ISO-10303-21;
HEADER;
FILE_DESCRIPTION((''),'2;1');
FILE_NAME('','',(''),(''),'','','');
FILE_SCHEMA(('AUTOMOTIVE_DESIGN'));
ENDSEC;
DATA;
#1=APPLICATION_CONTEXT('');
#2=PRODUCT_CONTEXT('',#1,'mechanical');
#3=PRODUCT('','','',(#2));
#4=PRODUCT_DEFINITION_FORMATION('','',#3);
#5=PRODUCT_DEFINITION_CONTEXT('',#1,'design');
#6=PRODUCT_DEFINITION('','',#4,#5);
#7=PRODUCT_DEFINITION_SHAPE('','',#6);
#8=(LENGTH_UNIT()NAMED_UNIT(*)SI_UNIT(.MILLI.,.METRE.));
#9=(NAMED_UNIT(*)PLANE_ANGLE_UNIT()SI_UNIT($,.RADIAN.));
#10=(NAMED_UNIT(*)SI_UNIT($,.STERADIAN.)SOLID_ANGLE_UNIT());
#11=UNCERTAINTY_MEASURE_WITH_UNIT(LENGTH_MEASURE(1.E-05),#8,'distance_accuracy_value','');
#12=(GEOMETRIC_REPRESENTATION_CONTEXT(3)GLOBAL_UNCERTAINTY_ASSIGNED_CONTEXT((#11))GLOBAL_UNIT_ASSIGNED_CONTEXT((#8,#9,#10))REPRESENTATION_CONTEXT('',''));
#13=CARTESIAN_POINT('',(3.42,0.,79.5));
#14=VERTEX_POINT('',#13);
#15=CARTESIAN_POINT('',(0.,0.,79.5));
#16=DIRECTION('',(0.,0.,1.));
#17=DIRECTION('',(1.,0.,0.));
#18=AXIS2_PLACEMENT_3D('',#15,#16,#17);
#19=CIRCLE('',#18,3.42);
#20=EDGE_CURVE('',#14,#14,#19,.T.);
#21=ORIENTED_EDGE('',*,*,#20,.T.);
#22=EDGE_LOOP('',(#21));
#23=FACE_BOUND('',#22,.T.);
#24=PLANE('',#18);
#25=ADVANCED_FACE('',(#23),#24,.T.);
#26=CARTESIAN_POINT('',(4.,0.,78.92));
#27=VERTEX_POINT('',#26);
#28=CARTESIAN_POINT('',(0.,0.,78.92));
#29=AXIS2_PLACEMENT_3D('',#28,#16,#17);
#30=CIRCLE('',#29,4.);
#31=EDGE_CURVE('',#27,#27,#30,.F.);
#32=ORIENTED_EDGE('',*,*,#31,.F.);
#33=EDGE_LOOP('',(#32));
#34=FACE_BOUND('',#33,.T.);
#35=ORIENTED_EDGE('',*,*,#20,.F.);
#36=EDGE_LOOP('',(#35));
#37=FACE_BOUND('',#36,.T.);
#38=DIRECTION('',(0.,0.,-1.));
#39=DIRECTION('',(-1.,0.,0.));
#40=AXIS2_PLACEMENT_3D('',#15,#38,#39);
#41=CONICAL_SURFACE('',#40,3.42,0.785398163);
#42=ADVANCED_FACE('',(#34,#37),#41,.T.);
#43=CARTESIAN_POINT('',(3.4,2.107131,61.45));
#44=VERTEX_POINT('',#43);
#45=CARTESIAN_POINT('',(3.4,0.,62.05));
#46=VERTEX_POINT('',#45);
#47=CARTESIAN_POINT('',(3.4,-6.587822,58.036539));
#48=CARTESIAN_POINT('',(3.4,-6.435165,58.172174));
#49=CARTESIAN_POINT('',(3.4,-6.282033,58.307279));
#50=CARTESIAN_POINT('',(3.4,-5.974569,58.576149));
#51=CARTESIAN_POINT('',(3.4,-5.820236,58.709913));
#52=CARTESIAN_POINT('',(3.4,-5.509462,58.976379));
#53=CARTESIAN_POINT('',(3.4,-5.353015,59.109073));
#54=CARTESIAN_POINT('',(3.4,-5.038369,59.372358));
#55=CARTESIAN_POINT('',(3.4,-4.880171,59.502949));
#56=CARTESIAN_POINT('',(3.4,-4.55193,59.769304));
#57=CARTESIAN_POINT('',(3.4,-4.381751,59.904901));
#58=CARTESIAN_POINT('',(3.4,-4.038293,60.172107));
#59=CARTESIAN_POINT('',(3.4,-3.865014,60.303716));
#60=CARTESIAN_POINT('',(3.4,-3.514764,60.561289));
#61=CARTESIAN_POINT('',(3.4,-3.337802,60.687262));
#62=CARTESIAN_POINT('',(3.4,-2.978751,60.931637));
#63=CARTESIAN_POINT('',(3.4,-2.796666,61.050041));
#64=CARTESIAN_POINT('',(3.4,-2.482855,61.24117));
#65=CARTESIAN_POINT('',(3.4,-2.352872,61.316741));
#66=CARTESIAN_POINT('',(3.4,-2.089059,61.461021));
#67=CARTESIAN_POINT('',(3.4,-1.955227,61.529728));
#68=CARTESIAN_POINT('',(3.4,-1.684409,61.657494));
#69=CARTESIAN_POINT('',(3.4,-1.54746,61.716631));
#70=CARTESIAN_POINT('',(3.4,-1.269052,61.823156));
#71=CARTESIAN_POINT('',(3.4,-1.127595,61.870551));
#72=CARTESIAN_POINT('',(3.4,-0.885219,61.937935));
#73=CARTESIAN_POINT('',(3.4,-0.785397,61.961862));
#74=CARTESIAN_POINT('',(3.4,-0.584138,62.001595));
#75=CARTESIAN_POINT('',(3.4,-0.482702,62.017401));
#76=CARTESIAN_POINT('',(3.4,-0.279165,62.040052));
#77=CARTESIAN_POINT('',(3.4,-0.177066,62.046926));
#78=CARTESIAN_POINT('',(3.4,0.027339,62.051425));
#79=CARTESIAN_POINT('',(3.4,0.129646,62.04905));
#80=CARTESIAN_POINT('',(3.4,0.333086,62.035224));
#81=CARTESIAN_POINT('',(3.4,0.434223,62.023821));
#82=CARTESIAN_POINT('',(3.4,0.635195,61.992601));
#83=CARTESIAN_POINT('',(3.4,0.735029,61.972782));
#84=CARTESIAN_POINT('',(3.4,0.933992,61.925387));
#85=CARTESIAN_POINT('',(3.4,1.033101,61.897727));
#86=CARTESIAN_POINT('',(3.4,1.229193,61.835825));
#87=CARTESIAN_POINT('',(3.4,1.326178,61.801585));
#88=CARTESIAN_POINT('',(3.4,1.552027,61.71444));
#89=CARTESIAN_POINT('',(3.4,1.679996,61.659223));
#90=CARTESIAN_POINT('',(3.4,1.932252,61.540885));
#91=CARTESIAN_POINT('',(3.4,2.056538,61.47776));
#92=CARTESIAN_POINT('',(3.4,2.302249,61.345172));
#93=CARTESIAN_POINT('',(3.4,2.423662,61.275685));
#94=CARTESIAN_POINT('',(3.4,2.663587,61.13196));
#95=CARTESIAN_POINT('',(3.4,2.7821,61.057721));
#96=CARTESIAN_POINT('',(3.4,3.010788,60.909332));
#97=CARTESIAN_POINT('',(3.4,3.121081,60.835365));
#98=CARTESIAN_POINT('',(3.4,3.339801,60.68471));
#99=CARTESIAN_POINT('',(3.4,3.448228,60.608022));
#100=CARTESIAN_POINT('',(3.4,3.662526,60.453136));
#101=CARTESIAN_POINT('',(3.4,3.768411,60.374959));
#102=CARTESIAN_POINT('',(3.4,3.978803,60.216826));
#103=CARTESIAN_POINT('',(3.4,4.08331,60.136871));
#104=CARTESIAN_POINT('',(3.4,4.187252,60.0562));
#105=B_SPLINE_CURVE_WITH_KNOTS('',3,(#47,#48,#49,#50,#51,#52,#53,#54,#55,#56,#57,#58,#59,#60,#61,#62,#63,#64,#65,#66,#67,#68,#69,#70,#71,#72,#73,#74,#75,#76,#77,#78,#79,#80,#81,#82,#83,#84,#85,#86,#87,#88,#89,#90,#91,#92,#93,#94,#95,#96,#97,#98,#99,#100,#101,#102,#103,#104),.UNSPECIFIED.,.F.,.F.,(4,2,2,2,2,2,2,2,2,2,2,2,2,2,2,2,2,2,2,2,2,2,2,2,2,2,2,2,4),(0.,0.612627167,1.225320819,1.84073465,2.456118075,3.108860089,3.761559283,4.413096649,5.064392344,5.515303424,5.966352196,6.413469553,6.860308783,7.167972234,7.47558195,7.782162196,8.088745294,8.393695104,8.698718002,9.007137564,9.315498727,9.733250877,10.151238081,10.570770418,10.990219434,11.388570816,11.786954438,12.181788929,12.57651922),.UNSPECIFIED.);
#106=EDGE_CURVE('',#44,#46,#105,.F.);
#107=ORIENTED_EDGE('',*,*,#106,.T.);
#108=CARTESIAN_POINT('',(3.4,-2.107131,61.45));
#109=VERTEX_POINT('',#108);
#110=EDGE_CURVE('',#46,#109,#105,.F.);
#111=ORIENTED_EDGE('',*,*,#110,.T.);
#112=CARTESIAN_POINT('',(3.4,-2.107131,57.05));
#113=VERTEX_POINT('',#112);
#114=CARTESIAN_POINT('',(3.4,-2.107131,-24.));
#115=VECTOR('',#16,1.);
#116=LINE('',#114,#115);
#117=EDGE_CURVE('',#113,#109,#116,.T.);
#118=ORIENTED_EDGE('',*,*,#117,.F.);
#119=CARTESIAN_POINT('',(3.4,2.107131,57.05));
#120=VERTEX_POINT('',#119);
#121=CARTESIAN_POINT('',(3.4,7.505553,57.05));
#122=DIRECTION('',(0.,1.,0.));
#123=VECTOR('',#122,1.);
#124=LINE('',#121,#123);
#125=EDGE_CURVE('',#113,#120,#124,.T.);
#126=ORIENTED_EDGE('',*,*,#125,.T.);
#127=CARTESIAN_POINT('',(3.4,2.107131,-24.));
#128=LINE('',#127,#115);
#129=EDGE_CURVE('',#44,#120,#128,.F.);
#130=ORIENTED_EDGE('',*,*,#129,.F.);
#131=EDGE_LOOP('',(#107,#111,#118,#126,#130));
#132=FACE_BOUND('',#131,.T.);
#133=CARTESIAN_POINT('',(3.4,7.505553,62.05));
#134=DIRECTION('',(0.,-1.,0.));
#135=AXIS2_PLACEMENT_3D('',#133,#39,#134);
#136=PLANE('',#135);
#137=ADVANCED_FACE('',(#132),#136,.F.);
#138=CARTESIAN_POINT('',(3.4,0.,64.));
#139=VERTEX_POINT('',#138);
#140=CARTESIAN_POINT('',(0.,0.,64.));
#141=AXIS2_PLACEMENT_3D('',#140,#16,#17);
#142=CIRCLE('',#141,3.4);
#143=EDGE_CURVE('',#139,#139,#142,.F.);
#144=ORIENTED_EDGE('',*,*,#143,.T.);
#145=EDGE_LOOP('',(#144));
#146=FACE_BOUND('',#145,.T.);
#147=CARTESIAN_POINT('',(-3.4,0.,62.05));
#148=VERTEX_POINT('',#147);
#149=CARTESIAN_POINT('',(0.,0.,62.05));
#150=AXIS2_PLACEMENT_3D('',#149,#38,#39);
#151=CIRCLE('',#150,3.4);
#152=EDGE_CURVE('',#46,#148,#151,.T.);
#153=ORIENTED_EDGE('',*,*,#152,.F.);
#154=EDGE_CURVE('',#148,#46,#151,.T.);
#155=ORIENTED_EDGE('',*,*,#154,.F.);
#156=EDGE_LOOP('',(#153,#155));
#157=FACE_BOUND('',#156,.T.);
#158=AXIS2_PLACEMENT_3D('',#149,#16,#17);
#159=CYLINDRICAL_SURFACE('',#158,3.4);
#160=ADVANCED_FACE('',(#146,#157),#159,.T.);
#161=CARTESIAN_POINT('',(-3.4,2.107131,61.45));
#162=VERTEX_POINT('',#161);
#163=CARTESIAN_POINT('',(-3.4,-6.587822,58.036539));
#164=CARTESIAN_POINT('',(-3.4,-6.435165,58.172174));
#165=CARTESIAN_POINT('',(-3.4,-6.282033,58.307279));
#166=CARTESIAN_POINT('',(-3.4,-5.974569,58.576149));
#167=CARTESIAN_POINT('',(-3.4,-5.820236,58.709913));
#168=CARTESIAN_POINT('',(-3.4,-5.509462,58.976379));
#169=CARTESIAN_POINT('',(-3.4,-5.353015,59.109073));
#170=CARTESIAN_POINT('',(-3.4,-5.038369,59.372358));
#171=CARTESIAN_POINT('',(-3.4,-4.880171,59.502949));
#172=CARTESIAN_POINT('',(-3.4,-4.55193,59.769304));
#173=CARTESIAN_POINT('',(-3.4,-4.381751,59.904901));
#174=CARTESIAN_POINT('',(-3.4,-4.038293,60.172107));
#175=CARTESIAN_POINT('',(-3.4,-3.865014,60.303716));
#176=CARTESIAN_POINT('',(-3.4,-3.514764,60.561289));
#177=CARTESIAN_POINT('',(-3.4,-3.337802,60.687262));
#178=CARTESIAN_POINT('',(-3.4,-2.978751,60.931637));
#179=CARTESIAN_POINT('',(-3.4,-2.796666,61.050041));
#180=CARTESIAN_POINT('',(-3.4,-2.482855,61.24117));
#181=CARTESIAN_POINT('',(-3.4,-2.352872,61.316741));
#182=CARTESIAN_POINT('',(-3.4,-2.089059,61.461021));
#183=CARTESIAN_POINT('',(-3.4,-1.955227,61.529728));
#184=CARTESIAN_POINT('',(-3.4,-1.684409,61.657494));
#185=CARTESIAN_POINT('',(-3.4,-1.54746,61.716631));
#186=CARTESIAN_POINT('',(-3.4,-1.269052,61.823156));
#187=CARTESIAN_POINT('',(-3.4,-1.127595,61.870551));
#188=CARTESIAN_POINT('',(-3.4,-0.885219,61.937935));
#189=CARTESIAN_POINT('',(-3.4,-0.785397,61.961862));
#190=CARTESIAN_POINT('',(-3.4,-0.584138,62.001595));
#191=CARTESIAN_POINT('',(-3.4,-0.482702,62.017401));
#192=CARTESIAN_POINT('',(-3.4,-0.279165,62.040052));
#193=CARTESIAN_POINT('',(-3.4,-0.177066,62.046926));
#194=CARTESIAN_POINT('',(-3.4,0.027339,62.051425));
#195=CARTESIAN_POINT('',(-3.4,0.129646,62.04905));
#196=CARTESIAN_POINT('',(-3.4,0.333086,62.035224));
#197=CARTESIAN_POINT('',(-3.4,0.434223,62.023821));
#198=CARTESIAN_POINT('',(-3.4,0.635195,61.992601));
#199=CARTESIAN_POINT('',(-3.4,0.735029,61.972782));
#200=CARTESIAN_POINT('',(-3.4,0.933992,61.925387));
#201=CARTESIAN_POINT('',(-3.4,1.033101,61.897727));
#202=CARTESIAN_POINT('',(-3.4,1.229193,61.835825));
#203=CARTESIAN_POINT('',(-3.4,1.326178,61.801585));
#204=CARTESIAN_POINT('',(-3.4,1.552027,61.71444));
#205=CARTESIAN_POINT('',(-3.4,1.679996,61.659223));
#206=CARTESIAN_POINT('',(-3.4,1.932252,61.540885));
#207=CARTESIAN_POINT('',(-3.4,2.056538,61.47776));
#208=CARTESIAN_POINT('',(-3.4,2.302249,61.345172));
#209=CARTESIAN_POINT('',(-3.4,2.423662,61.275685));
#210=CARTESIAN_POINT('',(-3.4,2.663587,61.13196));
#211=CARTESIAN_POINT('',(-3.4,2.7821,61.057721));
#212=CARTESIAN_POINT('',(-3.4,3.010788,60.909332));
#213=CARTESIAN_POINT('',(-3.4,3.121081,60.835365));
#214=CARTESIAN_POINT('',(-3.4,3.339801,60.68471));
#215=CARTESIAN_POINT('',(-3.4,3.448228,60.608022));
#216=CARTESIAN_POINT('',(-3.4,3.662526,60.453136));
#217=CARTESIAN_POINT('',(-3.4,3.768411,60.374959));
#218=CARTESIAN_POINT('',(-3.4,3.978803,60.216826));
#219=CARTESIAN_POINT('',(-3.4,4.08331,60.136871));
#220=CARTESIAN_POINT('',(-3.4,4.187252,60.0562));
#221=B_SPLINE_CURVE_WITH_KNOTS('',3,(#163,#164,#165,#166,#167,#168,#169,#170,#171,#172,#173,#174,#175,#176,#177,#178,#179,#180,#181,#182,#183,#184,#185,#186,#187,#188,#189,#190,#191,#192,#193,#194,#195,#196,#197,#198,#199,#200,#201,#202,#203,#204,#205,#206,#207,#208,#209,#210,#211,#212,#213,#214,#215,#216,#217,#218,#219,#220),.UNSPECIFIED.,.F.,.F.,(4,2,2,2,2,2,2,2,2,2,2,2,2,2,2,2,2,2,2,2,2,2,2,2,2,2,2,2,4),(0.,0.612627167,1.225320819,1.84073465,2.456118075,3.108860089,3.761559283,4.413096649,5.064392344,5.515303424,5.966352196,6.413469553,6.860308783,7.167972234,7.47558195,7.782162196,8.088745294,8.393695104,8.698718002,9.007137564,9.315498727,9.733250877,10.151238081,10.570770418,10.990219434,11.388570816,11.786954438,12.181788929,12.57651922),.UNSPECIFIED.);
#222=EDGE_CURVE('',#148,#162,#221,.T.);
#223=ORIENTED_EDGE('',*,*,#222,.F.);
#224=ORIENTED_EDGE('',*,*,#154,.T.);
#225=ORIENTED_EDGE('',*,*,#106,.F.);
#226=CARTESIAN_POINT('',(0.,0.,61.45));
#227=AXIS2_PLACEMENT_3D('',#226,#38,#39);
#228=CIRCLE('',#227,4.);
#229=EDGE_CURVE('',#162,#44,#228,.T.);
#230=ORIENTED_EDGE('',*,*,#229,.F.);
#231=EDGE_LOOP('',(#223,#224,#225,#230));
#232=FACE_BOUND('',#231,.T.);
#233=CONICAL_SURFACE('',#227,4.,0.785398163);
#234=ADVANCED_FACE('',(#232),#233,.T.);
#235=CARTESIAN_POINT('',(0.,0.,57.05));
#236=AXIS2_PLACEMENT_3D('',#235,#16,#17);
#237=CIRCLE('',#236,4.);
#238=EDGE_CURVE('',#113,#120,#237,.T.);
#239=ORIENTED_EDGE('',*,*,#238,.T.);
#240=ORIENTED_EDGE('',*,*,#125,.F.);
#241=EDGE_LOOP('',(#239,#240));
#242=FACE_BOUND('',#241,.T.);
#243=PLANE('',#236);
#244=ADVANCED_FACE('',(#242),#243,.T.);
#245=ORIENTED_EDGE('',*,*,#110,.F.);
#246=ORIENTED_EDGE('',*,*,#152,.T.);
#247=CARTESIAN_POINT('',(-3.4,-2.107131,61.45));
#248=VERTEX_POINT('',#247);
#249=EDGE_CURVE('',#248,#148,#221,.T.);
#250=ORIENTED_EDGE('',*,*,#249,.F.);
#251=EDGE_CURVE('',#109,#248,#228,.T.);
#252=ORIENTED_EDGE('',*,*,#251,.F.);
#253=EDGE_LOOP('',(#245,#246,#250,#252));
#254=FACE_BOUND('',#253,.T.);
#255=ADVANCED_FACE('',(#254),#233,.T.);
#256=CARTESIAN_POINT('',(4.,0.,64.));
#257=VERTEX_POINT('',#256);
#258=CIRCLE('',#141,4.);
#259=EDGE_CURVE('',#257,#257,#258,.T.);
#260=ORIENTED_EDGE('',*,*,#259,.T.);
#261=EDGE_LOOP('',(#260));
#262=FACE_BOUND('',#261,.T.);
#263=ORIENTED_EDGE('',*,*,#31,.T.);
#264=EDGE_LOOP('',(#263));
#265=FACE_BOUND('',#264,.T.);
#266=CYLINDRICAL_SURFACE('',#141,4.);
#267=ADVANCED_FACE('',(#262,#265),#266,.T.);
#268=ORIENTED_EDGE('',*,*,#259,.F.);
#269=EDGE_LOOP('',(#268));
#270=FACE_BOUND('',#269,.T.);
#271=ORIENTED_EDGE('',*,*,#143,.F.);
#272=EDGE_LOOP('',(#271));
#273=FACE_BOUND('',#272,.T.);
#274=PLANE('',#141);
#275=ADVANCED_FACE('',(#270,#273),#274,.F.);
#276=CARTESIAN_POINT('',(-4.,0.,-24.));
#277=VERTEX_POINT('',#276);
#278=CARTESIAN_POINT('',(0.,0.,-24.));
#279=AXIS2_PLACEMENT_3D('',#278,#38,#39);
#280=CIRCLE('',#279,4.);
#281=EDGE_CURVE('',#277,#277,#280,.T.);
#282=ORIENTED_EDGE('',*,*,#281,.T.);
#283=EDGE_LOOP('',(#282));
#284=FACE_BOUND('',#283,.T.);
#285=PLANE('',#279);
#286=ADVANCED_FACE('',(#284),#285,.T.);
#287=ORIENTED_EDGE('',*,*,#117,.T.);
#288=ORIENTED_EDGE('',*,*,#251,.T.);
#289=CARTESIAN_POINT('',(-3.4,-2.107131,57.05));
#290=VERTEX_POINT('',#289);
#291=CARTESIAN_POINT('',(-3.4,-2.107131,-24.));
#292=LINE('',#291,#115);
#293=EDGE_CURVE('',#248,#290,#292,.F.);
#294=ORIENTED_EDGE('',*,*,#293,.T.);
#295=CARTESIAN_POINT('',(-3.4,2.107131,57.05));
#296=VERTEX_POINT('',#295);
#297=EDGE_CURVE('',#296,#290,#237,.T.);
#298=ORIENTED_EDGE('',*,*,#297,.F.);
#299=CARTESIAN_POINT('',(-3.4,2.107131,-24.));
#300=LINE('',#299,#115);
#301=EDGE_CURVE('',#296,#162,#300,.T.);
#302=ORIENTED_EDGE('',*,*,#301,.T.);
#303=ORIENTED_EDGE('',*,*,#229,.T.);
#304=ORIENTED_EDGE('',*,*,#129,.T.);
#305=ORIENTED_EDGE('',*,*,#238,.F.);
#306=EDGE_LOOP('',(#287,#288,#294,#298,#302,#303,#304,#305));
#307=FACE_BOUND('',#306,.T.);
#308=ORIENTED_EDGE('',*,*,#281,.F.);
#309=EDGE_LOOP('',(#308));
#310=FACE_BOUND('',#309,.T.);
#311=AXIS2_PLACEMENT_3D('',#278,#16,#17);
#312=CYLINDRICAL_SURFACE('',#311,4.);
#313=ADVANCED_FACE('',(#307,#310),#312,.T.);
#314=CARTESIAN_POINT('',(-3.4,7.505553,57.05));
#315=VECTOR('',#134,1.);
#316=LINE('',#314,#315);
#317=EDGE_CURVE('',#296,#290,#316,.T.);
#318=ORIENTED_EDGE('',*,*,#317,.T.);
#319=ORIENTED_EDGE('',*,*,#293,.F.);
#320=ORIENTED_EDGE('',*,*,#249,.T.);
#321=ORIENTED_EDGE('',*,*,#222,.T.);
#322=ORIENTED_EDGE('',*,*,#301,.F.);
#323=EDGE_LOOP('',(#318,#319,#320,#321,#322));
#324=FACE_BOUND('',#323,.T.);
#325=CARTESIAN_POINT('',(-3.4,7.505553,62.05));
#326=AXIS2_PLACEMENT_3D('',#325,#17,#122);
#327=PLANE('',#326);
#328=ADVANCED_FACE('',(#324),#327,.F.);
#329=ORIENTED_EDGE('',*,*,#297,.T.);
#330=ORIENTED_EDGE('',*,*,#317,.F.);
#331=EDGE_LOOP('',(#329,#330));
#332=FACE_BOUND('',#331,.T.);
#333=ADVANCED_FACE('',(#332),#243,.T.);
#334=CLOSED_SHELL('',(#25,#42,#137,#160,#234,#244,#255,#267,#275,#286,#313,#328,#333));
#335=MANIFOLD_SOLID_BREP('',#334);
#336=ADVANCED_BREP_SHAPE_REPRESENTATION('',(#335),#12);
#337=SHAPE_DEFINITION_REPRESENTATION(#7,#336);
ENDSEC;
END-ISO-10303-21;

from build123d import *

# Parameters (mm, degrees)
EXTRUDE_START        = 79.5
SKETCH_4_R           = 4
EXTRUDE_1_DEPTH      = 15.5
SKETCH_5_R           = 3.4
EXTRUDE_2_DEPTH      = 1.95
SKETCH_6_R           = 4
EXTRUDE_3_DEPTH      = 86.05
CHAMFER_1_SIZE       = 0.58
CHAMFER_2_SIZE       = 0.6
CUT_EXTRUDE_START    = 57.05
SKETCH_9_OUTSIDE_W   = 30.824
SKETCH_9_OUTSIDE_H   = 30.824
SKETCH_9_OUTSIDE_W_2 = 6.8
SKETCH_9_OUTSIDE_H_2 = 15.011106998
CUT_EXTRUDE_1_DEPTH  = 5


with BuildPart() as part:
    # 草图4 → 凸台-拉伸1 (new body)
    with BuildSketch(Plane.XY.offset(EXTRUDE_START)):
        Circle(SKETCH_4_R)
    extrude(amount=-EXTRUDE_1_DEPTH)

    # 草图5 → 凸台-拉伸2 (add)
    with BuildSketch(Plane(origin=(0, 0, 64), x_dir=(-1, 0, 0), z_dir=(0, 0, -1))):
        with Locations(Location((0, 0, 0), (0, 0, 180))):
            Circle(SKETCH_5_R)
    extrude(amount=EXTRUDE_2_DEPTH)

    # 草图6 → 凸台-拉伸3 (add)
    with BuildSketch(Plane(origin=(0, 0, 62.05), x_dir=(-1, 0, 0), z_dir=(0, 0, -1))):
        with Locations(Location((0, 0, 0), (0, 0, 180))):
            Circle(SKETCH_6_R)
    extrude(amount=EXTRUDE_3_DEPTH)

    # 倒角1
    chamfer_1_edges = [part.edges().sort_by_distance(p)[0] for p in [
        (-4, 0, 79.5),
    ]]
    chamfer(chamfer_1_edges, length=CHAMFER_1_SIZE)

    # 倒角2
    chamfer_2_edges = [part.edges().sort_by_distance(p)[0] for p in [
        (-4, 0, 62.05),
    ]]
    chamfer(chamfer_2_edges, length=CHAMFER_2_SIZE - 0.0001)  # a hair under: the kernel refuses the full size

    # 草图9 outside → 切除-拉伸1 (cut)
    with BuildSketch(Plane.XY.offset(CUT_EXTRUDE_START)):
        Rectangle(SKETCH_9_OUTSIDE_W, SKETCH_9_OUTSIDE_H)
        Rectangle(SKETCH_9_OUTSIDE_W_2, SKETCH_9_OUTSIDE_H_2, mode=Mode.SUBTRACT)
    extrude(amount=CUT_EXTRUDE_1_DEPTH, mode=Mode.SUBTRACT)


solid = part.part
